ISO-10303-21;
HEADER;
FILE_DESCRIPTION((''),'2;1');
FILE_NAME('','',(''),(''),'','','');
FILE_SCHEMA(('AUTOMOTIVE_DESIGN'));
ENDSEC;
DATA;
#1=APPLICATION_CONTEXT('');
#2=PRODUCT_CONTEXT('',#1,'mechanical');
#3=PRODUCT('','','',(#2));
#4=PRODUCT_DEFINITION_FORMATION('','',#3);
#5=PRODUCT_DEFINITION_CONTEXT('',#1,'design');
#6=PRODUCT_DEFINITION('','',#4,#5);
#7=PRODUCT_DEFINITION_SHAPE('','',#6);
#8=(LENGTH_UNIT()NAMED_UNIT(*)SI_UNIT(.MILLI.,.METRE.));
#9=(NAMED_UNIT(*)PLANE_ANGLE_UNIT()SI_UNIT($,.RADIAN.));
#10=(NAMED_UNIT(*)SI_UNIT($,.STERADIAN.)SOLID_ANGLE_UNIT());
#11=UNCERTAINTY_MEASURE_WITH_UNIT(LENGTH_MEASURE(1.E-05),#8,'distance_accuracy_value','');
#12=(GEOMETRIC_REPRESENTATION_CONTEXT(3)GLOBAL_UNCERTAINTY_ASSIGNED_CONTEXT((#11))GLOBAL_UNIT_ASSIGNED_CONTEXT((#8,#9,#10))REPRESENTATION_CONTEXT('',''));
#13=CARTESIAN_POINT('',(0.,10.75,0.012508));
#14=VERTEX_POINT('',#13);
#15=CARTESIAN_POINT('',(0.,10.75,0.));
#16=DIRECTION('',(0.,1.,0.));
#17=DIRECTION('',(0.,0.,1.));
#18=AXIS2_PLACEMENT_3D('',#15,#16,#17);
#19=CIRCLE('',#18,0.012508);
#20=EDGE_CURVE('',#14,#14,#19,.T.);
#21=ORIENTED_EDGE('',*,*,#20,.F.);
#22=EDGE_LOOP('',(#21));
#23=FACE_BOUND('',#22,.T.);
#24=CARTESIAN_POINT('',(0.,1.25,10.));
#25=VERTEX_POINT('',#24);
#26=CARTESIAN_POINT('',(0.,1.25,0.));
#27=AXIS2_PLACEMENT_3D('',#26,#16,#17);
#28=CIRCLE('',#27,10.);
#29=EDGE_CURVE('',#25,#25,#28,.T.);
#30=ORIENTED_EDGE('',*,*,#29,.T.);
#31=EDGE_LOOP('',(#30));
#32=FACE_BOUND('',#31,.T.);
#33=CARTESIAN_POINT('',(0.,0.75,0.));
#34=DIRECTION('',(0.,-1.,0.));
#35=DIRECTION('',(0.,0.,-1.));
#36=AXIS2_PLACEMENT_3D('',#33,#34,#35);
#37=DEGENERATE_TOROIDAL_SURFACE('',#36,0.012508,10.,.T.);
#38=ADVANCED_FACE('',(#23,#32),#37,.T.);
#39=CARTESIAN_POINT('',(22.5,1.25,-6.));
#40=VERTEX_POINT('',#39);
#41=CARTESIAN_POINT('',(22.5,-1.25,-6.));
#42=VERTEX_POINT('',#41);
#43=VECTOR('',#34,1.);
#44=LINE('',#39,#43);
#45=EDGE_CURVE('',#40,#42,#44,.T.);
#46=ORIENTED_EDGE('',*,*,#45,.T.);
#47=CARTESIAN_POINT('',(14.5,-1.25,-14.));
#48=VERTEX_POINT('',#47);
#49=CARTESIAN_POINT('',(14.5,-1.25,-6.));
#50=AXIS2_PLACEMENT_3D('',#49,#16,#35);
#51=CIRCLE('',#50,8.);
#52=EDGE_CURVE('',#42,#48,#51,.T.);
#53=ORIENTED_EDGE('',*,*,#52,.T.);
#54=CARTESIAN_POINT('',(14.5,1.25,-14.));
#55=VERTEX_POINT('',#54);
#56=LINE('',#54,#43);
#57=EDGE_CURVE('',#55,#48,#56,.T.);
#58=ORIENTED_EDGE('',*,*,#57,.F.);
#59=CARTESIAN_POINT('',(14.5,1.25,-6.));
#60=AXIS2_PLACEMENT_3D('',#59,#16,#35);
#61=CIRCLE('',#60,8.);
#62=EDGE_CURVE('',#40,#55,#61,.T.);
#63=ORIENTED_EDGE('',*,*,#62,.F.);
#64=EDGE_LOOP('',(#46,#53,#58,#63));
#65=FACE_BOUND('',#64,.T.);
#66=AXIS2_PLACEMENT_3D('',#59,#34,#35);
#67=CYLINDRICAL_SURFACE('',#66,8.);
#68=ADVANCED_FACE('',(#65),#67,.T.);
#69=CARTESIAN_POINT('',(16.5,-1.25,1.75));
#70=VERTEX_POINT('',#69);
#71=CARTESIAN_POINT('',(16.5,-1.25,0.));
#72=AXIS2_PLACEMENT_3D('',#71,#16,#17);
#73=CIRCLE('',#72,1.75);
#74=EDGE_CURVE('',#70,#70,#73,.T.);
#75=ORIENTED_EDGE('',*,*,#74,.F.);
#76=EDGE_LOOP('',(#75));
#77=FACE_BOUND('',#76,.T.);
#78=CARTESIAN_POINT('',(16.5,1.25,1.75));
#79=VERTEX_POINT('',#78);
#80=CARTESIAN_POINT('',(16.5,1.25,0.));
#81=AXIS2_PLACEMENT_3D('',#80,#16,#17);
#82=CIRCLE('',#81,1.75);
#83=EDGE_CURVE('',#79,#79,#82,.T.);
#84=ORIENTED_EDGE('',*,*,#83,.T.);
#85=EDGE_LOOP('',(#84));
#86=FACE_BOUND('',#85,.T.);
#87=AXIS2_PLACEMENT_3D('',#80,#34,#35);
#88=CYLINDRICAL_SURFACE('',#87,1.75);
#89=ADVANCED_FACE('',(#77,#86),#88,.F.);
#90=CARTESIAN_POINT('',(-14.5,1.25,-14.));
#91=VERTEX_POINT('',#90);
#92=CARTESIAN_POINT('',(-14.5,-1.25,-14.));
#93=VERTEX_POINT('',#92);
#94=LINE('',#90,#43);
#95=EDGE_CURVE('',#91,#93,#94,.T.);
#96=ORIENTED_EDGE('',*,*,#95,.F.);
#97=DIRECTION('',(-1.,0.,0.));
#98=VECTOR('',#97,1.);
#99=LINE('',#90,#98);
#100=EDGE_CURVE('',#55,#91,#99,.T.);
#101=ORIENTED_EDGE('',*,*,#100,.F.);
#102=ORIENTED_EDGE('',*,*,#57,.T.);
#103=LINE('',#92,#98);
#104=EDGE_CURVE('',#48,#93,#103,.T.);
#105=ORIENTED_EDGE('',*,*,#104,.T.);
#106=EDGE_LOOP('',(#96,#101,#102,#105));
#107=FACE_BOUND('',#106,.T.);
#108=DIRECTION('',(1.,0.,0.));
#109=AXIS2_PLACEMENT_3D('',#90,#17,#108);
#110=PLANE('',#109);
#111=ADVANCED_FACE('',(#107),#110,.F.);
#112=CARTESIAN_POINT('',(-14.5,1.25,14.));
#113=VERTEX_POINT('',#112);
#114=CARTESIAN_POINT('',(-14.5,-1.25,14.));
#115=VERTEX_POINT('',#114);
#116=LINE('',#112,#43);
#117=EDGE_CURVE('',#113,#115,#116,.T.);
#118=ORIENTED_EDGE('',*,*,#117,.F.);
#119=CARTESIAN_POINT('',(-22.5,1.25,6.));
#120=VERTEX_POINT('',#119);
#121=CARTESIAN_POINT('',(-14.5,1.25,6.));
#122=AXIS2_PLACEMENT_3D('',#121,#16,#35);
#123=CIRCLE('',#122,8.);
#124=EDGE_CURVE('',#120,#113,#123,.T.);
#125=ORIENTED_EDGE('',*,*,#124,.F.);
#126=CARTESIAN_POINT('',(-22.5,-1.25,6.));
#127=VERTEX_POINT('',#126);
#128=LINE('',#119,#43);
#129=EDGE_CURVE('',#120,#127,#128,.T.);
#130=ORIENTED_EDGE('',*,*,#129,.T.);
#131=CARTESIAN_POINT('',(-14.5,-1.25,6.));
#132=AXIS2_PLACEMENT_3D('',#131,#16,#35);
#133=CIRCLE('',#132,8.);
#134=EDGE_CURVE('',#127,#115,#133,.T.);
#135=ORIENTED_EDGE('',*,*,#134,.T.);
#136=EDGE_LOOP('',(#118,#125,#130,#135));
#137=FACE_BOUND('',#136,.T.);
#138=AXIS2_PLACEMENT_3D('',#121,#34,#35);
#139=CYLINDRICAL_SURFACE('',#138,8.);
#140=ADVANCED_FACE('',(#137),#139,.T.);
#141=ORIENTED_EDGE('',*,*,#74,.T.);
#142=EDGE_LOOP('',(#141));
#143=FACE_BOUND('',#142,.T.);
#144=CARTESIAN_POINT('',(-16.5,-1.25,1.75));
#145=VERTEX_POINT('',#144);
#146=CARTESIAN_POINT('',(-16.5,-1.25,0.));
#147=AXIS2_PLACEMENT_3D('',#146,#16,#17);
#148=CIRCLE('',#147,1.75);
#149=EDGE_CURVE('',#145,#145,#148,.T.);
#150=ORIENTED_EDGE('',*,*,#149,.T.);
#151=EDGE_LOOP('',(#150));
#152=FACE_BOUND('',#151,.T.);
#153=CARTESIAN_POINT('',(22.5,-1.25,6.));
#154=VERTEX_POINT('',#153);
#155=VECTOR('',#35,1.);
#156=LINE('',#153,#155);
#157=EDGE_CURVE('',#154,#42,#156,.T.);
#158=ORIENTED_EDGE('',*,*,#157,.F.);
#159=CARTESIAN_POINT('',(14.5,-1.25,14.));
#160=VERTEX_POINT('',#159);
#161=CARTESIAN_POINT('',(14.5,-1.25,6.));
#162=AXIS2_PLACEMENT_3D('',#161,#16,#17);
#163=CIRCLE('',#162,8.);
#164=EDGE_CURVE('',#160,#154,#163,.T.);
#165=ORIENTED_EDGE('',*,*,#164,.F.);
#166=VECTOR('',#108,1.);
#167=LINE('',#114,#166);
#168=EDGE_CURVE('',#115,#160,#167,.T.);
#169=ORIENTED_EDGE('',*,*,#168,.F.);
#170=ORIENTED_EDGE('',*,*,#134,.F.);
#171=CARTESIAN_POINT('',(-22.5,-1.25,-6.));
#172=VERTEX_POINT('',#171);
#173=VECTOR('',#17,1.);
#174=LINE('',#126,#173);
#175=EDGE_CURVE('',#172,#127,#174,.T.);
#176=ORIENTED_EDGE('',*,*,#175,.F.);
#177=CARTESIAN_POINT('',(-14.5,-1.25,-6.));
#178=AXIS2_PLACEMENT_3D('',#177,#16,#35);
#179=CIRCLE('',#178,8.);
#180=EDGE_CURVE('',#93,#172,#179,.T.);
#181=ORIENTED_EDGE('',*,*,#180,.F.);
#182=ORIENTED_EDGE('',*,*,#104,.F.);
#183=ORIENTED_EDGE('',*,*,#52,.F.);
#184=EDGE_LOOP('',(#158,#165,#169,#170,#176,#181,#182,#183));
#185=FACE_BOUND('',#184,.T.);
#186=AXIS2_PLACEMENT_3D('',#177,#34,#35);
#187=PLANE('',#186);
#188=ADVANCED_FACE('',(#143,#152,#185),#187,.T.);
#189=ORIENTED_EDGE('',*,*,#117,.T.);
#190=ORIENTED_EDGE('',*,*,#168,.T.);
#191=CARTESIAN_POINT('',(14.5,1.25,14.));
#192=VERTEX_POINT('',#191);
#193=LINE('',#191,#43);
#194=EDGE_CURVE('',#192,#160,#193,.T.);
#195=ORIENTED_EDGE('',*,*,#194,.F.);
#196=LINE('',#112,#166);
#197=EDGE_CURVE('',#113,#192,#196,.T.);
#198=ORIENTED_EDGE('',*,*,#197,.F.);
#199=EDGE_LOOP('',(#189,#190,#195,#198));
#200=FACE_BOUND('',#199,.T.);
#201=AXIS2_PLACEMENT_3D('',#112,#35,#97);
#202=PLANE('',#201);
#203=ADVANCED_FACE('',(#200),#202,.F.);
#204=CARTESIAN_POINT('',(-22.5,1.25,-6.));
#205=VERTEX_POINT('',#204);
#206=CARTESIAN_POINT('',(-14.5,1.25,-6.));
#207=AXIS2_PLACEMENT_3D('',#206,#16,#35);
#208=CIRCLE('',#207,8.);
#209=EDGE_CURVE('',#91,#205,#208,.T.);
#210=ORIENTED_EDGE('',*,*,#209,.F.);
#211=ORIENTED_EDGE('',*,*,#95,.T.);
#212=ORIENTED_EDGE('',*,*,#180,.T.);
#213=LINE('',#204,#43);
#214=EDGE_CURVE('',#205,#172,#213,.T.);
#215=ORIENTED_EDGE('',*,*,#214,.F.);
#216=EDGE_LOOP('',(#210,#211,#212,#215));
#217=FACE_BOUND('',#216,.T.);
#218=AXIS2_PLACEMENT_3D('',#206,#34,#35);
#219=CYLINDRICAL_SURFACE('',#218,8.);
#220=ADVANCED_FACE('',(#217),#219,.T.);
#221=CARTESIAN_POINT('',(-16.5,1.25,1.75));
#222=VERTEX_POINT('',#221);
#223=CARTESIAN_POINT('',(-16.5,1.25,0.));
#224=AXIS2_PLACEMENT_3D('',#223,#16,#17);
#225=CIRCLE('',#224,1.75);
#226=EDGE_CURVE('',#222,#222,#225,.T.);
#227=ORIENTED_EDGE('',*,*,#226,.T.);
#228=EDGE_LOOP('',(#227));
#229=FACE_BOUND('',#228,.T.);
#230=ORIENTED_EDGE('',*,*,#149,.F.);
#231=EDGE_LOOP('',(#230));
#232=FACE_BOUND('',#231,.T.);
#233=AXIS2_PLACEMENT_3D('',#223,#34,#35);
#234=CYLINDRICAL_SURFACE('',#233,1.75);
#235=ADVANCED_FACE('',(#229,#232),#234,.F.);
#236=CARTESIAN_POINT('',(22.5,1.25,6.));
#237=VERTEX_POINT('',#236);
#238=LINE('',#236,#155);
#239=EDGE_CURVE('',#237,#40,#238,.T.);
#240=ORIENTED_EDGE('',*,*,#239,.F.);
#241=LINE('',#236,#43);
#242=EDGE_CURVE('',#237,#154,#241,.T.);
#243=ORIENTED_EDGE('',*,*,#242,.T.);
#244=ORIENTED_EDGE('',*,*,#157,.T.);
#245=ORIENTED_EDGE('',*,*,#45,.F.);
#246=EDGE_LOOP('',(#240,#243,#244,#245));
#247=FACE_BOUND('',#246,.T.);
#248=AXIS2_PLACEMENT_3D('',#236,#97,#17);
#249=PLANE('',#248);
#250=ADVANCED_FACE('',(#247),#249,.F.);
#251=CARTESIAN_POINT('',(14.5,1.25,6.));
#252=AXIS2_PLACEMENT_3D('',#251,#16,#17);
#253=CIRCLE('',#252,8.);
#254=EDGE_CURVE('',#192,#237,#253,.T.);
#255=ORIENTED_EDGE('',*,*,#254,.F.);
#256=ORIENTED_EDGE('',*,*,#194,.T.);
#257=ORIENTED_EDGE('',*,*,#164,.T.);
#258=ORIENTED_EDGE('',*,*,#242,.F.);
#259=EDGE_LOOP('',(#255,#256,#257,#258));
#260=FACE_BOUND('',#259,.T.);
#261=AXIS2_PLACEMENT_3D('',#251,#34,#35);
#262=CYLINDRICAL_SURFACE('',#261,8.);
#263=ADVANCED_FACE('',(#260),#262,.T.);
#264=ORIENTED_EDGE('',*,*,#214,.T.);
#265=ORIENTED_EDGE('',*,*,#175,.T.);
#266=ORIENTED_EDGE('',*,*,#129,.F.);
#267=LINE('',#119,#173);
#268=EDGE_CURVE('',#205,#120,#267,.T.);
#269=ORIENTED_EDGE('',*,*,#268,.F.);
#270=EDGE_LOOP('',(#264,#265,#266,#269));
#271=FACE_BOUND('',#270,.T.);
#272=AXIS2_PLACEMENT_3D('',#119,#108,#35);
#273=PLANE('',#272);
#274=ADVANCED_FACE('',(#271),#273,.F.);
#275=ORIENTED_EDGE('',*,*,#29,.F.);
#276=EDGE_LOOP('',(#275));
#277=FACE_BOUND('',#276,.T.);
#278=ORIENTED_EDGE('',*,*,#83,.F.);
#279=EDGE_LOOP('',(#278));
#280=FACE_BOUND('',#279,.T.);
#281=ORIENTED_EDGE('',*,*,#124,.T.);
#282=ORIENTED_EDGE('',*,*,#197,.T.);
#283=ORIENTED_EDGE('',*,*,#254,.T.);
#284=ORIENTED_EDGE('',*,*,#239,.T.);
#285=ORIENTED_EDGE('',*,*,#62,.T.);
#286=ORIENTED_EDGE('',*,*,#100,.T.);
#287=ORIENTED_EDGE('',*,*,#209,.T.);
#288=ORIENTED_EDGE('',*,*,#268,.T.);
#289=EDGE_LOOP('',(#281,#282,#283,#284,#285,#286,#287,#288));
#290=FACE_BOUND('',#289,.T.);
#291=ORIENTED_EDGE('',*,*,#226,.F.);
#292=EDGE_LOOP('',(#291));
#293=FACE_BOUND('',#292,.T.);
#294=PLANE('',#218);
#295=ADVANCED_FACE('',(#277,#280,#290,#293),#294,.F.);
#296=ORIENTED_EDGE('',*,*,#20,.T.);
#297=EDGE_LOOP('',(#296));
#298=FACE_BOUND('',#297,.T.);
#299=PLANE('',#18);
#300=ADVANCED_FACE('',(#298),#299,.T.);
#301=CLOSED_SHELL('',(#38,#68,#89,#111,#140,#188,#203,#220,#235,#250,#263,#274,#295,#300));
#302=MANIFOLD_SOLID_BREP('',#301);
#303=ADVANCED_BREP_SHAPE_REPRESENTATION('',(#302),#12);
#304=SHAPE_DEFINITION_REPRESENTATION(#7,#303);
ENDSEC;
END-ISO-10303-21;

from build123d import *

# Parameters (mm, degrees)
SKETCH1_R           = 1.75
BOSS_EXTRUDE1_DEPTH = 1.25
SKETCH2_R           = 10
BOSS_EXTRUDE2_DEPTH = 9.5
FILLET1_R           = 10


with BuildPart() as part:
    # Sketch1 → Boss-Extrude1 (new, symmetric)
    with BuildSketch(Plane(origin=(0, 0, 0), x_dir=(1, 0, 0), z_dir=(0, 1, 0))):
        with BuildLine():
            Line((-14.5, -14), (14.5, -14))
            ThreePointArc((14.5, -14), (20.156854249, -11.656854249), (22.5, -6))
            Line((22.5, -6), (22.5, 6))
            ThreePointArc((22.5, 6), (20.156854249, 11.656854249), (14.5, 14))
            Line((14.5, 14), (-14.5, 14))
            ThreePointArc((-14.5, 14), (-20.156854249, 11.656854249), (-22.5, 6))
            Line((-22.5, 6), (-22.5, -6))
            ThreePointArc((-22.5, -6), (-20.156854249, -11.656854249), (-14.5, -14))
        make_face()
        with Locations(Location((16.5, 0, 0), (0, 0, 270))):
            Circle(SKETCH1_R, mode=Mode.SUBTRACT)
        with Locations(Location((-16.5, 0, 0), (0, 0, 270))):
            Circle(SKETCH1_R, mode=Mode.SUBTRACT)
    extrude(amount=BOSS_EXTRUDE1_DEPTH, both=True)

    # Sketch2 → Boss-Extrude2 (add)
    with BuildSketch(Plane(origin=(0, 1.25, 0), x_dir=(1, 0, 0), z_dir=(0, 1, 0))):
        with Locations(Location((0, 0, 0), (0, 0, 270))):
            Circle(SKETCH2_R)
    extrude(amount=BOSS_EXTRUDE2_DEPTH)

    # Fillet1
    # the kernel refuses this fillet: 10 mm, written as the material it takes off along each edge
    with BuildSketch(Plane(origin=(0, 10.75, 0), x_dir=(0, 0, 1), z_dir=(-1, 0, 0))) as fillet1_piece_1:
        with BuildLine():
            CenterArc((0.012507822, -10), FILLET1_R, 2.865983983, 87.134016017)
            Line((0.012507822, 0), (0.012507822, 0.2))
            Line((0.012507822, 0.2), (10, 0.2))
            Line((10, 0.2), (10.2, 0))
            ThreePointArc((10.2, 0), (10.2, -4.75), (10.199749844, -9.49))
            Line((10.199749844, -9.49), (10, -9.5))
        make_face()
    revolve(axis=Axis((0, 10.75, 0), (0, 1, 0)), mode=Mode.SUBTRACT)


solid = part.part
